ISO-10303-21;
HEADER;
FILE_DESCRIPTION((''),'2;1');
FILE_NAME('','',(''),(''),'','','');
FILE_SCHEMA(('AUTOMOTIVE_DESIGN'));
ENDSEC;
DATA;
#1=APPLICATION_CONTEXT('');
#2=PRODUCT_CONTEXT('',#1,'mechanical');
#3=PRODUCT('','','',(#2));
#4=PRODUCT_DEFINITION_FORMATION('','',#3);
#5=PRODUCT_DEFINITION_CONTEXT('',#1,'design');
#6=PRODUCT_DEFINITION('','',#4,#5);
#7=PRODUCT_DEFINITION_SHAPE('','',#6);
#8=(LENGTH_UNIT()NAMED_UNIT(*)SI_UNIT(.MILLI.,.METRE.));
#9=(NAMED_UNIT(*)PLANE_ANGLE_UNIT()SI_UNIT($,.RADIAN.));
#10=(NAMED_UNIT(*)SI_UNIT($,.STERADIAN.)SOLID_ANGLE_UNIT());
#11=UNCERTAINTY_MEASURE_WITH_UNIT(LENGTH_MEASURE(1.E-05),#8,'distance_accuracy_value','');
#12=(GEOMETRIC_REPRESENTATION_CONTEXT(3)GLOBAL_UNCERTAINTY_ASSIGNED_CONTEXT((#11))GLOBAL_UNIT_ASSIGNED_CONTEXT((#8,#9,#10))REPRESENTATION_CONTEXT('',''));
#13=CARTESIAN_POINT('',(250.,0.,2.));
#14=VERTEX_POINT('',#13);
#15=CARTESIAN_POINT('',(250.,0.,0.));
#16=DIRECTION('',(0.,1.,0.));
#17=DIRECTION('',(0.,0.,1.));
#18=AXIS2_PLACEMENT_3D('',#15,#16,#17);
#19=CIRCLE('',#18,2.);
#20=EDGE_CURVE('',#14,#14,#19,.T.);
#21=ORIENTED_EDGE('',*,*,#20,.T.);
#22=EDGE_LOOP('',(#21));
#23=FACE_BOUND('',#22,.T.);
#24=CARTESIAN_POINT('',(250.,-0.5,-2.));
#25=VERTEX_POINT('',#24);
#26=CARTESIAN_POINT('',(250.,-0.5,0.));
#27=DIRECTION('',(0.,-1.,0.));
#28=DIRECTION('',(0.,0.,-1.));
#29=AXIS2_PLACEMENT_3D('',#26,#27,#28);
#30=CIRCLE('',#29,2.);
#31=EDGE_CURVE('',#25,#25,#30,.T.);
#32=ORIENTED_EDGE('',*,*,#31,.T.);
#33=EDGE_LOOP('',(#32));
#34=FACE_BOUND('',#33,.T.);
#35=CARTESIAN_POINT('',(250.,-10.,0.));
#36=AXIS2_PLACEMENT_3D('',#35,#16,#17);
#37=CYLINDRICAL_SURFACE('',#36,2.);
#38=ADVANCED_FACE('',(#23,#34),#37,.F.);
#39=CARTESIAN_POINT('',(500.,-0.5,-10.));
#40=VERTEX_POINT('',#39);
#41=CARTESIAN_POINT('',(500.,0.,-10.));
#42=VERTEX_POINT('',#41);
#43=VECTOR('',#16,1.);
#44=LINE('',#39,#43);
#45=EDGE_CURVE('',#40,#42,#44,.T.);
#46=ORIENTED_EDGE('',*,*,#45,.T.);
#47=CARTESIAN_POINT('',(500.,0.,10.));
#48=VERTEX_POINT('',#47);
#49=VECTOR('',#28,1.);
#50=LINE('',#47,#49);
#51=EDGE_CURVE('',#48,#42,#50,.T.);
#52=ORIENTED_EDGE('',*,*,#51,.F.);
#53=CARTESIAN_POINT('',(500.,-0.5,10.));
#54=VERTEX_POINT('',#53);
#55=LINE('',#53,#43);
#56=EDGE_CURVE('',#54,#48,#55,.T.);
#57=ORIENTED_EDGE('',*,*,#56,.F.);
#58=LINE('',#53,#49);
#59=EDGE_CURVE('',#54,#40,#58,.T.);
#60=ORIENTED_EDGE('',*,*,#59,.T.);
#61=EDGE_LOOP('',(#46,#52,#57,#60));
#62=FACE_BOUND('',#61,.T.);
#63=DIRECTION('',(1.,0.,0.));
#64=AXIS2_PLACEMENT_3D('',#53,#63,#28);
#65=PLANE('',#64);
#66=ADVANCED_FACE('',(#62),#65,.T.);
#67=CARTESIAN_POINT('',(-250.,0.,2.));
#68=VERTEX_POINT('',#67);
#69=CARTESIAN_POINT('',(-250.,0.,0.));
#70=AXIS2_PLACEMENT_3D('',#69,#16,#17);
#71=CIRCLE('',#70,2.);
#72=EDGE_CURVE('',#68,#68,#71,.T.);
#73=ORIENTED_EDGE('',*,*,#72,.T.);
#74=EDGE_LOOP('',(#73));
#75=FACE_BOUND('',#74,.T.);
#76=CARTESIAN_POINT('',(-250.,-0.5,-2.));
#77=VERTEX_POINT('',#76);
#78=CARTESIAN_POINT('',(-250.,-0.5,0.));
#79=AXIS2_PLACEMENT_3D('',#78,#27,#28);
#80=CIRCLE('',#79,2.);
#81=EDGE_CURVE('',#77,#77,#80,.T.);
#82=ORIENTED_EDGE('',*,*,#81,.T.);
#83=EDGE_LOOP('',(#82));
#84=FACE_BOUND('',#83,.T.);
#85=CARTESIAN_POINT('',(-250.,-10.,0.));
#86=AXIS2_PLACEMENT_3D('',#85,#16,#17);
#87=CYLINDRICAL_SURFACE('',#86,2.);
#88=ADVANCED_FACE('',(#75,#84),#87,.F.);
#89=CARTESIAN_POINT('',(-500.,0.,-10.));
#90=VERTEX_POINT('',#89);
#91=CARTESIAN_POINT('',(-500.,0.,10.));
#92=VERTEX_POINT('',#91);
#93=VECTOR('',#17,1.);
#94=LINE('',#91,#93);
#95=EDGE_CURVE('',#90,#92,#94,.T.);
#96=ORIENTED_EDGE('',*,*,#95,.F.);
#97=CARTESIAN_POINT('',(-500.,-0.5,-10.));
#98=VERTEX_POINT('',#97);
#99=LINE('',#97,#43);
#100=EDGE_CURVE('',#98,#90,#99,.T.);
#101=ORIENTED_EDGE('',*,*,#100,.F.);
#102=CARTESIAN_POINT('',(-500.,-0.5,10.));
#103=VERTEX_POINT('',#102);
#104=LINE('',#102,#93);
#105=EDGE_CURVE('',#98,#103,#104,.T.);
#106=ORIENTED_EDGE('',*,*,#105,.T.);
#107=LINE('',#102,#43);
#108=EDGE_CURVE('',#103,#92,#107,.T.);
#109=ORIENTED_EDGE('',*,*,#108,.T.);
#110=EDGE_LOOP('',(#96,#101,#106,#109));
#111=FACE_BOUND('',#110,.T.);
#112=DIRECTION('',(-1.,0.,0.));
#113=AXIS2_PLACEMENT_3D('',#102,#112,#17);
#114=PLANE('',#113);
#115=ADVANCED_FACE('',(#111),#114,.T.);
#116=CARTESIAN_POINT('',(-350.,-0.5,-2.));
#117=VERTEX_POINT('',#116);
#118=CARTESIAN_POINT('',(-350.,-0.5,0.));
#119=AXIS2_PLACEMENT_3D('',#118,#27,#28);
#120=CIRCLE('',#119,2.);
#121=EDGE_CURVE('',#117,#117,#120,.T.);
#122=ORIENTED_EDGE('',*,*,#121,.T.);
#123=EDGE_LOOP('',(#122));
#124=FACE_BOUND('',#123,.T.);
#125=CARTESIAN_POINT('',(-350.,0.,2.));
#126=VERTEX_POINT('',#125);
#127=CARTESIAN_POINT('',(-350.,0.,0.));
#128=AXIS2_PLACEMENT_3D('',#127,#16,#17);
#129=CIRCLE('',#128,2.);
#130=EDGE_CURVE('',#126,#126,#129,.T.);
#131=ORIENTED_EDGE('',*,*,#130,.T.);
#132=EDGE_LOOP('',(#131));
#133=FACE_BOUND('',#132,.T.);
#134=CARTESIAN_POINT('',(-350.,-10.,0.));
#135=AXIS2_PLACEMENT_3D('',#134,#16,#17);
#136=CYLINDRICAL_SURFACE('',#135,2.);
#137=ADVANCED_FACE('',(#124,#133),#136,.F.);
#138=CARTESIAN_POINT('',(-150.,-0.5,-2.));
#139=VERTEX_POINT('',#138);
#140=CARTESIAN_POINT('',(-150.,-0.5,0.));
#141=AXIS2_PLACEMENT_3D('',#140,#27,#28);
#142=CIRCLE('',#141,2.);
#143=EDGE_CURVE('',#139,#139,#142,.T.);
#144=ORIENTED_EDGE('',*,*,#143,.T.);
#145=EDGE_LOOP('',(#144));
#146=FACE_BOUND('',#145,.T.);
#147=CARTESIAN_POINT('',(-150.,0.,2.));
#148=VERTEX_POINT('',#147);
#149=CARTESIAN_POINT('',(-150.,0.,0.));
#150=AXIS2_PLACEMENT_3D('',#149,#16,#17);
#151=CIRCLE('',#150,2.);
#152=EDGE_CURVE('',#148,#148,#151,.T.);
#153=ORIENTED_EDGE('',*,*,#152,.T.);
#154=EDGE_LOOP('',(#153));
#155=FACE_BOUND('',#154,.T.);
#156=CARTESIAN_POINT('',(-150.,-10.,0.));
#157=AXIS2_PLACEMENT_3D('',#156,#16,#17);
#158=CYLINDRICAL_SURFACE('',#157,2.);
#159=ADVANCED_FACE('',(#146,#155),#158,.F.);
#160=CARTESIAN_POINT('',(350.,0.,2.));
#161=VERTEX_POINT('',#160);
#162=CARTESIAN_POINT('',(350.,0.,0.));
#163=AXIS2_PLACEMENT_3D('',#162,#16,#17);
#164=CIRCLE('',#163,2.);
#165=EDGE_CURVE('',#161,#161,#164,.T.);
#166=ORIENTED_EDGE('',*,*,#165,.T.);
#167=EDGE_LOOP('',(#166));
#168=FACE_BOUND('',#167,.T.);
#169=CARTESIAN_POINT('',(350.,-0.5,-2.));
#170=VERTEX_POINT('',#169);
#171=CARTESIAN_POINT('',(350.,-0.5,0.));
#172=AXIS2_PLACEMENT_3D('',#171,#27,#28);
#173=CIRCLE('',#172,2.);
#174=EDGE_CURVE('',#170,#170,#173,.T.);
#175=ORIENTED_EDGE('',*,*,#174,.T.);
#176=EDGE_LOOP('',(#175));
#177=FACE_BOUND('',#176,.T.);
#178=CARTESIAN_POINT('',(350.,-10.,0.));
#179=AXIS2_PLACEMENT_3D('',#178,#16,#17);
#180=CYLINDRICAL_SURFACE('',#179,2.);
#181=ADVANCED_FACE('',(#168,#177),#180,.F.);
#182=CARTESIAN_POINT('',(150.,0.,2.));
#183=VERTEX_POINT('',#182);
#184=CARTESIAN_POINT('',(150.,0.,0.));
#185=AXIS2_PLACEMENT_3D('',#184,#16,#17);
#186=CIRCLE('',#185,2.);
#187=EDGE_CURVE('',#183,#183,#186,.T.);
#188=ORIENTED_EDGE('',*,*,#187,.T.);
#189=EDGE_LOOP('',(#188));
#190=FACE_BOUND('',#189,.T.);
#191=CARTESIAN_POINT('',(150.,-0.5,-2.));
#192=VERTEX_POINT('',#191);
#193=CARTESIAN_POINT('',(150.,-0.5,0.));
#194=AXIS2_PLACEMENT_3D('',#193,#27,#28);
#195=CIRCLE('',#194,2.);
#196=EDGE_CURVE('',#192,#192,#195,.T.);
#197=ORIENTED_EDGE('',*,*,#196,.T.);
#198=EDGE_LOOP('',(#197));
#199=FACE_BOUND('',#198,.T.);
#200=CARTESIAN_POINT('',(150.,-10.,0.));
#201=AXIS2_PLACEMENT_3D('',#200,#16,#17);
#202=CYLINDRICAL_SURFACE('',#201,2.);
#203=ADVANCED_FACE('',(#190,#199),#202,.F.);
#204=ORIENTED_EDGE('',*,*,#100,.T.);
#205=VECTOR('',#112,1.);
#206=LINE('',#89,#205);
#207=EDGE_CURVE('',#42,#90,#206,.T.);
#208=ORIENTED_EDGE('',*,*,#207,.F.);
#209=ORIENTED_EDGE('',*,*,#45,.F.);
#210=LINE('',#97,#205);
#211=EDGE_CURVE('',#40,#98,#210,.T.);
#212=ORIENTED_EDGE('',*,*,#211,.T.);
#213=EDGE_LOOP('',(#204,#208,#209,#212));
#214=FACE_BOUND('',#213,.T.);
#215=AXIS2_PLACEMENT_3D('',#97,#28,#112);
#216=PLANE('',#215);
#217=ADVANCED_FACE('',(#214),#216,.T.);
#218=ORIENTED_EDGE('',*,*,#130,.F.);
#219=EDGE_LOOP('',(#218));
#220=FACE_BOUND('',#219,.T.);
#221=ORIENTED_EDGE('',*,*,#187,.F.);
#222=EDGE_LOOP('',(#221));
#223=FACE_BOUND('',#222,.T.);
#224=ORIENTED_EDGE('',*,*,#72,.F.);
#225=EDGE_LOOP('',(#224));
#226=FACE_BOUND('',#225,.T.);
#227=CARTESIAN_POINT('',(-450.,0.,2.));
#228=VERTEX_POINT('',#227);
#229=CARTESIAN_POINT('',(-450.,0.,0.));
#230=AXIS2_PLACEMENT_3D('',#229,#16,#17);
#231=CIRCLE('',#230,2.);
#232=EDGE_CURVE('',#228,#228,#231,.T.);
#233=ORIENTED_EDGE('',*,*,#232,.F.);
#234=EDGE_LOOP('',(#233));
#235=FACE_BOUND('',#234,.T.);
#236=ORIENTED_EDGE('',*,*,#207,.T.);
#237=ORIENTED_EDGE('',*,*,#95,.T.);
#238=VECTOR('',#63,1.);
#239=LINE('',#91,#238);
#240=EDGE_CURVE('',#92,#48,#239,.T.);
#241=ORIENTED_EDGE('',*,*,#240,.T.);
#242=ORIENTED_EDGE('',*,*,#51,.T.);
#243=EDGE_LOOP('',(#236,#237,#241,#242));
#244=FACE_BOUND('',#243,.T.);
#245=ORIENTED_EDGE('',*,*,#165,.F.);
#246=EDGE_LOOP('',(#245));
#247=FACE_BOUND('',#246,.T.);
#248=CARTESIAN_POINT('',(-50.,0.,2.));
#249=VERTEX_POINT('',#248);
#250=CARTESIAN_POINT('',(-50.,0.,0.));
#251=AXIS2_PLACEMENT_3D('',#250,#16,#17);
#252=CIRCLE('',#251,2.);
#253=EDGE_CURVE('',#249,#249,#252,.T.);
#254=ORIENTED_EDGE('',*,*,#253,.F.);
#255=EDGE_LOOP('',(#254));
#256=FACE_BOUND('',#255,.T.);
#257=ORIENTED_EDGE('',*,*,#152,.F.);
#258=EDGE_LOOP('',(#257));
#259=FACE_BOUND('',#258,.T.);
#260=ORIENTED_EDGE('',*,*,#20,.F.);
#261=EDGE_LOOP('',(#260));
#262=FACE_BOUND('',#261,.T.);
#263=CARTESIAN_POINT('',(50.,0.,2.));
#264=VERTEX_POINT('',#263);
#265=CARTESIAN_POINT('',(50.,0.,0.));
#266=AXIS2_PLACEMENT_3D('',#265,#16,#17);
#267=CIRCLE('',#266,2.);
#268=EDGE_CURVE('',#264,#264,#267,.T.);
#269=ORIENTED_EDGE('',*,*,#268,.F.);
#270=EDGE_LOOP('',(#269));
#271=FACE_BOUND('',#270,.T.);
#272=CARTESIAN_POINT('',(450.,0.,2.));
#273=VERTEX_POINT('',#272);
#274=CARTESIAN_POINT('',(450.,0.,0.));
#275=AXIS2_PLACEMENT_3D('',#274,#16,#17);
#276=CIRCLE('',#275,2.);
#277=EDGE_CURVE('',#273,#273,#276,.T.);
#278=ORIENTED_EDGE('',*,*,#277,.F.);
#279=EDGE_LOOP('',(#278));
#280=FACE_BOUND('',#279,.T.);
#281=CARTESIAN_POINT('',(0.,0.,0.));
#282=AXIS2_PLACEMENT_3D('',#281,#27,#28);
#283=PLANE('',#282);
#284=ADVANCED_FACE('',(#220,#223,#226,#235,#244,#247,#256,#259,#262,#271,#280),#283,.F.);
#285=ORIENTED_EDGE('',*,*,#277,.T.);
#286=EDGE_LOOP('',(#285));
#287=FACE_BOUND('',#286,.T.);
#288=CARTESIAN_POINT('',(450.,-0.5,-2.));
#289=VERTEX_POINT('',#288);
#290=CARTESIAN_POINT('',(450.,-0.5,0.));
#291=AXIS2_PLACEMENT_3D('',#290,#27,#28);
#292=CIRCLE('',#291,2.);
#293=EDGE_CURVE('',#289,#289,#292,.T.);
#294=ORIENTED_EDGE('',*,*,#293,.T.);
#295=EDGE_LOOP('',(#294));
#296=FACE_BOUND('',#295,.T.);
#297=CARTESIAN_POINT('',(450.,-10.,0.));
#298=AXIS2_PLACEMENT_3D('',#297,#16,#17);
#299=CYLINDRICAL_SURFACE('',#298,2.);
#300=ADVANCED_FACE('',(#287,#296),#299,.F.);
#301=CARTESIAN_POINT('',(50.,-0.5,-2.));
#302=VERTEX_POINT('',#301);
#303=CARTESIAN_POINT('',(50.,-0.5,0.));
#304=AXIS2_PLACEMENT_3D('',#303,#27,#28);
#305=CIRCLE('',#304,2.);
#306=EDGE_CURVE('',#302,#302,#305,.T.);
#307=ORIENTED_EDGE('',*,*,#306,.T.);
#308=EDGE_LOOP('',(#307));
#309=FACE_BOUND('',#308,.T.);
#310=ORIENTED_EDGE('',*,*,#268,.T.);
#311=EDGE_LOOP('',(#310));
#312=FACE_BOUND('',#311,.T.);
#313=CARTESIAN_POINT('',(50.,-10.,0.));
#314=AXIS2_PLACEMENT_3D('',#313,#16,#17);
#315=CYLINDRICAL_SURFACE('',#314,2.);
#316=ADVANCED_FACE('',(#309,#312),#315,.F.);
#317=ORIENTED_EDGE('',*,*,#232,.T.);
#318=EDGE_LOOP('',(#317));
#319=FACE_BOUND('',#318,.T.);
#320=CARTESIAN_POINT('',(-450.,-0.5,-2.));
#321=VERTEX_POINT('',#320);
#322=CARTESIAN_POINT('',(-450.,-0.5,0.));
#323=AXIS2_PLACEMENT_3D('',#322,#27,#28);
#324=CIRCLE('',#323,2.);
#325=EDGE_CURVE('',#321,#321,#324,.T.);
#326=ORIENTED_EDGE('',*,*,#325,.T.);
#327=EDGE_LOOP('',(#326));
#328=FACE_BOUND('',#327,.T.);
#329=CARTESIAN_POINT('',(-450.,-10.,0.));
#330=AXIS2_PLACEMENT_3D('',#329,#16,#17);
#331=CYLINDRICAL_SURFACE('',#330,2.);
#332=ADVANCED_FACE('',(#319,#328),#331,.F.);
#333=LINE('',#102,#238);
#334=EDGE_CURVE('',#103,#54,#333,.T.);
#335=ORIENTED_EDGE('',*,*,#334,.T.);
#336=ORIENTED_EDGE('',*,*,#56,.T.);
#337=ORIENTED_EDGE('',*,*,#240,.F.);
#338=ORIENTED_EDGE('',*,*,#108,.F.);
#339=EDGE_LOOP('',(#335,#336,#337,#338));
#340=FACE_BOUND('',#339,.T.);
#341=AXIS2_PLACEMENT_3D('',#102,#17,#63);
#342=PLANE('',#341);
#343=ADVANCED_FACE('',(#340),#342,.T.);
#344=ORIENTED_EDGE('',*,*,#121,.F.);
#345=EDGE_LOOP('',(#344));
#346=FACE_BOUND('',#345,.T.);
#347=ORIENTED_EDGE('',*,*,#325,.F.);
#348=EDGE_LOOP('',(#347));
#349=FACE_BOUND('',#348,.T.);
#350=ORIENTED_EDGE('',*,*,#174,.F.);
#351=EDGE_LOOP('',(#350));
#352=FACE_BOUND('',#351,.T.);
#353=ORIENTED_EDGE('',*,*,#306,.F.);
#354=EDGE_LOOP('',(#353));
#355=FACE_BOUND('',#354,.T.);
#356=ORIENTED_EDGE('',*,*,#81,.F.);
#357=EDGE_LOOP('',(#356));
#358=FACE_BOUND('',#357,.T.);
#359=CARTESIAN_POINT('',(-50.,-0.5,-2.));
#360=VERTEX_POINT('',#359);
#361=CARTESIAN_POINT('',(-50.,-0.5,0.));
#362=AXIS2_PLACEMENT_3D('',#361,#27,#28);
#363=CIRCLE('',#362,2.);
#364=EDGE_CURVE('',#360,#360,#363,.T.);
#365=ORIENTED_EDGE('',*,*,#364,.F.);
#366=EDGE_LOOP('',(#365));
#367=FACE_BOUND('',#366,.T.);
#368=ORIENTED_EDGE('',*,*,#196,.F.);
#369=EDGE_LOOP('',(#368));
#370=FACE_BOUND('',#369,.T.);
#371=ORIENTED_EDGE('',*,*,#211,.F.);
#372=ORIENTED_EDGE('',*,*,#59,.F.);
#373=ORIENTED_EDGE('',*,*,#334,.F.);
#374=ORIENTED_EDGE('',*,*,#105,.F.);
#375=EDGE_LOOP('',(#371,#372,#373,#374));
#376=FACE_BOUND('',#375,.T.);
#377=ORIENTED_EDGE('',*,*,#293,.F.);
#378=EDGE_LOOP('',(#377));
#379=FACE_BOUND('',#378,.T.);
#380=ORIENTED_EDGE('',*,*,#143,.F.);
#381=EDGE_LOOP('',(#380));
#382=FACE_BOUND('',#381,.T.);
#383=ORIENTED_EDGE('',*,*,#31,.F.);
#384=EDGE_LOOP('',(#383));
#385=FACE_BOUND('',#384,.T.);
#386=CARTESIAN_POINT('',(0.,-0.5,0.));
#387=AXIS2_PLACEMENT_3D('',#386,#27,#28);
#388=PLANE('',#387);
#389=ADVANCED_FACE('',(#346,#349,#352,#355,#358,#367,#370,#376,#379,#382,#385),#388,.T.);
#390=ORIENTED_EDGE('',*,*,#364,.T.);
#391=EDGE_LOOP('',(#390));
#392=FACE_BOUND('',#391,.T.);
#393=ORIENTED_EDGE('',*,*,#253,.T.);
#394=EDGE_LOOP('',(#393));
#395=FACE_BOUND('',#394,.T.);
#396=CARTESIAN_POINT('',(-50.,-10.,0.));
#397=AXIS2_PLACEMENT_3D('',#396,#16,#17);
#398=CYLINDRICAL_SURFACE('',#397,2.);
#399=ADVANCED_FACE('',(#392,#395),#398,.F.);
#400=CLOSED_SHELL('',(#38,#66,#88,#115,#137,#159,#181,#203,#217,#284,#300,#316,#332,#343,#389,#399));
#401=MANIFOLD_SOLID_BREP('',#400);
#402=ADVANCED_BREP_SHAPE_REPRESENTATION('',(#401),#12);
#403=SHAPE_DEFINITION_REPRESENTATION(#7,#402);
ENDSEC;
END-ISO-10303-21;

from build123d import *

# Parameters (mm, degrees)
SKETCH1_W          = 1000
SKETCH1_H          = 20
BASE_FLANGE1_DEPTH = 0.5
SKETCH2_R          = 2
CUT_EXTRUDE1_DEPTH = 10


# Sheet-metal steps are written as plain solids
with BuildPart() as part:
    # Sketch1 → Base-Flange1 (new body)
    with BuildSketch(Plane(origin=(0, 0, 0), x_dir=(1, 0, 0), z_dir=(0, 1, 0))):
        Rectangle(SKETCH1_W, SKETCH1_H)
    extrude(amount=-BASE_FLANGE1_DEPTH)

    # Sketch2 → Cut-Extrude1 (cut)
    with BuildSketch(Plane(origin=(0, 0, 0), x_dir=(1, 0, 0), z_dir=(0, 1, 0))):
        with Locations(Location((-450, 0, 0), (0, 0, 270))):
            Circle(SKETCH2_R)
        with Locations(Location((-350, 0, 0), (0, 0, 270))):
            Circle(SKETCH2_R)
        with Locations(Location((-250, 0, 0), (0, 0, 270))):
            Circle(SKETCH2_R)
        with Locations(Location((-150, 0, 0), (0, 0, 270))):
            Circle(SKETCH2_R)
        with Locations(Location((-50, 0, 0), (0, 0, 270))):
            Circle(SKETCH2_R)
        with Locations(Location((50, 0, 0), (0, 0, 270))):
            Circle(SKETCH2_R)
        with Locations(Location((150, 0, 0), (0, 0, 270))):
            Circle(SKETCH2_R)
        with Locations(Location((250, 0, 0), (0, 0, 270))):
            Circle(SKETCH2_R)
        with Locations(Location((350, 0, 0), (0, 0, 270))):
            Circle(SKETCH2_R)
        with Locations(Location((450, 0, 0), (0, 0, 270))):
            Circle(SKETCH2_R)
    extrude(amount=-CUT_EXTRUDE1_DEPTH, mode=Mode.SUBTRACT)


solid = part.part
